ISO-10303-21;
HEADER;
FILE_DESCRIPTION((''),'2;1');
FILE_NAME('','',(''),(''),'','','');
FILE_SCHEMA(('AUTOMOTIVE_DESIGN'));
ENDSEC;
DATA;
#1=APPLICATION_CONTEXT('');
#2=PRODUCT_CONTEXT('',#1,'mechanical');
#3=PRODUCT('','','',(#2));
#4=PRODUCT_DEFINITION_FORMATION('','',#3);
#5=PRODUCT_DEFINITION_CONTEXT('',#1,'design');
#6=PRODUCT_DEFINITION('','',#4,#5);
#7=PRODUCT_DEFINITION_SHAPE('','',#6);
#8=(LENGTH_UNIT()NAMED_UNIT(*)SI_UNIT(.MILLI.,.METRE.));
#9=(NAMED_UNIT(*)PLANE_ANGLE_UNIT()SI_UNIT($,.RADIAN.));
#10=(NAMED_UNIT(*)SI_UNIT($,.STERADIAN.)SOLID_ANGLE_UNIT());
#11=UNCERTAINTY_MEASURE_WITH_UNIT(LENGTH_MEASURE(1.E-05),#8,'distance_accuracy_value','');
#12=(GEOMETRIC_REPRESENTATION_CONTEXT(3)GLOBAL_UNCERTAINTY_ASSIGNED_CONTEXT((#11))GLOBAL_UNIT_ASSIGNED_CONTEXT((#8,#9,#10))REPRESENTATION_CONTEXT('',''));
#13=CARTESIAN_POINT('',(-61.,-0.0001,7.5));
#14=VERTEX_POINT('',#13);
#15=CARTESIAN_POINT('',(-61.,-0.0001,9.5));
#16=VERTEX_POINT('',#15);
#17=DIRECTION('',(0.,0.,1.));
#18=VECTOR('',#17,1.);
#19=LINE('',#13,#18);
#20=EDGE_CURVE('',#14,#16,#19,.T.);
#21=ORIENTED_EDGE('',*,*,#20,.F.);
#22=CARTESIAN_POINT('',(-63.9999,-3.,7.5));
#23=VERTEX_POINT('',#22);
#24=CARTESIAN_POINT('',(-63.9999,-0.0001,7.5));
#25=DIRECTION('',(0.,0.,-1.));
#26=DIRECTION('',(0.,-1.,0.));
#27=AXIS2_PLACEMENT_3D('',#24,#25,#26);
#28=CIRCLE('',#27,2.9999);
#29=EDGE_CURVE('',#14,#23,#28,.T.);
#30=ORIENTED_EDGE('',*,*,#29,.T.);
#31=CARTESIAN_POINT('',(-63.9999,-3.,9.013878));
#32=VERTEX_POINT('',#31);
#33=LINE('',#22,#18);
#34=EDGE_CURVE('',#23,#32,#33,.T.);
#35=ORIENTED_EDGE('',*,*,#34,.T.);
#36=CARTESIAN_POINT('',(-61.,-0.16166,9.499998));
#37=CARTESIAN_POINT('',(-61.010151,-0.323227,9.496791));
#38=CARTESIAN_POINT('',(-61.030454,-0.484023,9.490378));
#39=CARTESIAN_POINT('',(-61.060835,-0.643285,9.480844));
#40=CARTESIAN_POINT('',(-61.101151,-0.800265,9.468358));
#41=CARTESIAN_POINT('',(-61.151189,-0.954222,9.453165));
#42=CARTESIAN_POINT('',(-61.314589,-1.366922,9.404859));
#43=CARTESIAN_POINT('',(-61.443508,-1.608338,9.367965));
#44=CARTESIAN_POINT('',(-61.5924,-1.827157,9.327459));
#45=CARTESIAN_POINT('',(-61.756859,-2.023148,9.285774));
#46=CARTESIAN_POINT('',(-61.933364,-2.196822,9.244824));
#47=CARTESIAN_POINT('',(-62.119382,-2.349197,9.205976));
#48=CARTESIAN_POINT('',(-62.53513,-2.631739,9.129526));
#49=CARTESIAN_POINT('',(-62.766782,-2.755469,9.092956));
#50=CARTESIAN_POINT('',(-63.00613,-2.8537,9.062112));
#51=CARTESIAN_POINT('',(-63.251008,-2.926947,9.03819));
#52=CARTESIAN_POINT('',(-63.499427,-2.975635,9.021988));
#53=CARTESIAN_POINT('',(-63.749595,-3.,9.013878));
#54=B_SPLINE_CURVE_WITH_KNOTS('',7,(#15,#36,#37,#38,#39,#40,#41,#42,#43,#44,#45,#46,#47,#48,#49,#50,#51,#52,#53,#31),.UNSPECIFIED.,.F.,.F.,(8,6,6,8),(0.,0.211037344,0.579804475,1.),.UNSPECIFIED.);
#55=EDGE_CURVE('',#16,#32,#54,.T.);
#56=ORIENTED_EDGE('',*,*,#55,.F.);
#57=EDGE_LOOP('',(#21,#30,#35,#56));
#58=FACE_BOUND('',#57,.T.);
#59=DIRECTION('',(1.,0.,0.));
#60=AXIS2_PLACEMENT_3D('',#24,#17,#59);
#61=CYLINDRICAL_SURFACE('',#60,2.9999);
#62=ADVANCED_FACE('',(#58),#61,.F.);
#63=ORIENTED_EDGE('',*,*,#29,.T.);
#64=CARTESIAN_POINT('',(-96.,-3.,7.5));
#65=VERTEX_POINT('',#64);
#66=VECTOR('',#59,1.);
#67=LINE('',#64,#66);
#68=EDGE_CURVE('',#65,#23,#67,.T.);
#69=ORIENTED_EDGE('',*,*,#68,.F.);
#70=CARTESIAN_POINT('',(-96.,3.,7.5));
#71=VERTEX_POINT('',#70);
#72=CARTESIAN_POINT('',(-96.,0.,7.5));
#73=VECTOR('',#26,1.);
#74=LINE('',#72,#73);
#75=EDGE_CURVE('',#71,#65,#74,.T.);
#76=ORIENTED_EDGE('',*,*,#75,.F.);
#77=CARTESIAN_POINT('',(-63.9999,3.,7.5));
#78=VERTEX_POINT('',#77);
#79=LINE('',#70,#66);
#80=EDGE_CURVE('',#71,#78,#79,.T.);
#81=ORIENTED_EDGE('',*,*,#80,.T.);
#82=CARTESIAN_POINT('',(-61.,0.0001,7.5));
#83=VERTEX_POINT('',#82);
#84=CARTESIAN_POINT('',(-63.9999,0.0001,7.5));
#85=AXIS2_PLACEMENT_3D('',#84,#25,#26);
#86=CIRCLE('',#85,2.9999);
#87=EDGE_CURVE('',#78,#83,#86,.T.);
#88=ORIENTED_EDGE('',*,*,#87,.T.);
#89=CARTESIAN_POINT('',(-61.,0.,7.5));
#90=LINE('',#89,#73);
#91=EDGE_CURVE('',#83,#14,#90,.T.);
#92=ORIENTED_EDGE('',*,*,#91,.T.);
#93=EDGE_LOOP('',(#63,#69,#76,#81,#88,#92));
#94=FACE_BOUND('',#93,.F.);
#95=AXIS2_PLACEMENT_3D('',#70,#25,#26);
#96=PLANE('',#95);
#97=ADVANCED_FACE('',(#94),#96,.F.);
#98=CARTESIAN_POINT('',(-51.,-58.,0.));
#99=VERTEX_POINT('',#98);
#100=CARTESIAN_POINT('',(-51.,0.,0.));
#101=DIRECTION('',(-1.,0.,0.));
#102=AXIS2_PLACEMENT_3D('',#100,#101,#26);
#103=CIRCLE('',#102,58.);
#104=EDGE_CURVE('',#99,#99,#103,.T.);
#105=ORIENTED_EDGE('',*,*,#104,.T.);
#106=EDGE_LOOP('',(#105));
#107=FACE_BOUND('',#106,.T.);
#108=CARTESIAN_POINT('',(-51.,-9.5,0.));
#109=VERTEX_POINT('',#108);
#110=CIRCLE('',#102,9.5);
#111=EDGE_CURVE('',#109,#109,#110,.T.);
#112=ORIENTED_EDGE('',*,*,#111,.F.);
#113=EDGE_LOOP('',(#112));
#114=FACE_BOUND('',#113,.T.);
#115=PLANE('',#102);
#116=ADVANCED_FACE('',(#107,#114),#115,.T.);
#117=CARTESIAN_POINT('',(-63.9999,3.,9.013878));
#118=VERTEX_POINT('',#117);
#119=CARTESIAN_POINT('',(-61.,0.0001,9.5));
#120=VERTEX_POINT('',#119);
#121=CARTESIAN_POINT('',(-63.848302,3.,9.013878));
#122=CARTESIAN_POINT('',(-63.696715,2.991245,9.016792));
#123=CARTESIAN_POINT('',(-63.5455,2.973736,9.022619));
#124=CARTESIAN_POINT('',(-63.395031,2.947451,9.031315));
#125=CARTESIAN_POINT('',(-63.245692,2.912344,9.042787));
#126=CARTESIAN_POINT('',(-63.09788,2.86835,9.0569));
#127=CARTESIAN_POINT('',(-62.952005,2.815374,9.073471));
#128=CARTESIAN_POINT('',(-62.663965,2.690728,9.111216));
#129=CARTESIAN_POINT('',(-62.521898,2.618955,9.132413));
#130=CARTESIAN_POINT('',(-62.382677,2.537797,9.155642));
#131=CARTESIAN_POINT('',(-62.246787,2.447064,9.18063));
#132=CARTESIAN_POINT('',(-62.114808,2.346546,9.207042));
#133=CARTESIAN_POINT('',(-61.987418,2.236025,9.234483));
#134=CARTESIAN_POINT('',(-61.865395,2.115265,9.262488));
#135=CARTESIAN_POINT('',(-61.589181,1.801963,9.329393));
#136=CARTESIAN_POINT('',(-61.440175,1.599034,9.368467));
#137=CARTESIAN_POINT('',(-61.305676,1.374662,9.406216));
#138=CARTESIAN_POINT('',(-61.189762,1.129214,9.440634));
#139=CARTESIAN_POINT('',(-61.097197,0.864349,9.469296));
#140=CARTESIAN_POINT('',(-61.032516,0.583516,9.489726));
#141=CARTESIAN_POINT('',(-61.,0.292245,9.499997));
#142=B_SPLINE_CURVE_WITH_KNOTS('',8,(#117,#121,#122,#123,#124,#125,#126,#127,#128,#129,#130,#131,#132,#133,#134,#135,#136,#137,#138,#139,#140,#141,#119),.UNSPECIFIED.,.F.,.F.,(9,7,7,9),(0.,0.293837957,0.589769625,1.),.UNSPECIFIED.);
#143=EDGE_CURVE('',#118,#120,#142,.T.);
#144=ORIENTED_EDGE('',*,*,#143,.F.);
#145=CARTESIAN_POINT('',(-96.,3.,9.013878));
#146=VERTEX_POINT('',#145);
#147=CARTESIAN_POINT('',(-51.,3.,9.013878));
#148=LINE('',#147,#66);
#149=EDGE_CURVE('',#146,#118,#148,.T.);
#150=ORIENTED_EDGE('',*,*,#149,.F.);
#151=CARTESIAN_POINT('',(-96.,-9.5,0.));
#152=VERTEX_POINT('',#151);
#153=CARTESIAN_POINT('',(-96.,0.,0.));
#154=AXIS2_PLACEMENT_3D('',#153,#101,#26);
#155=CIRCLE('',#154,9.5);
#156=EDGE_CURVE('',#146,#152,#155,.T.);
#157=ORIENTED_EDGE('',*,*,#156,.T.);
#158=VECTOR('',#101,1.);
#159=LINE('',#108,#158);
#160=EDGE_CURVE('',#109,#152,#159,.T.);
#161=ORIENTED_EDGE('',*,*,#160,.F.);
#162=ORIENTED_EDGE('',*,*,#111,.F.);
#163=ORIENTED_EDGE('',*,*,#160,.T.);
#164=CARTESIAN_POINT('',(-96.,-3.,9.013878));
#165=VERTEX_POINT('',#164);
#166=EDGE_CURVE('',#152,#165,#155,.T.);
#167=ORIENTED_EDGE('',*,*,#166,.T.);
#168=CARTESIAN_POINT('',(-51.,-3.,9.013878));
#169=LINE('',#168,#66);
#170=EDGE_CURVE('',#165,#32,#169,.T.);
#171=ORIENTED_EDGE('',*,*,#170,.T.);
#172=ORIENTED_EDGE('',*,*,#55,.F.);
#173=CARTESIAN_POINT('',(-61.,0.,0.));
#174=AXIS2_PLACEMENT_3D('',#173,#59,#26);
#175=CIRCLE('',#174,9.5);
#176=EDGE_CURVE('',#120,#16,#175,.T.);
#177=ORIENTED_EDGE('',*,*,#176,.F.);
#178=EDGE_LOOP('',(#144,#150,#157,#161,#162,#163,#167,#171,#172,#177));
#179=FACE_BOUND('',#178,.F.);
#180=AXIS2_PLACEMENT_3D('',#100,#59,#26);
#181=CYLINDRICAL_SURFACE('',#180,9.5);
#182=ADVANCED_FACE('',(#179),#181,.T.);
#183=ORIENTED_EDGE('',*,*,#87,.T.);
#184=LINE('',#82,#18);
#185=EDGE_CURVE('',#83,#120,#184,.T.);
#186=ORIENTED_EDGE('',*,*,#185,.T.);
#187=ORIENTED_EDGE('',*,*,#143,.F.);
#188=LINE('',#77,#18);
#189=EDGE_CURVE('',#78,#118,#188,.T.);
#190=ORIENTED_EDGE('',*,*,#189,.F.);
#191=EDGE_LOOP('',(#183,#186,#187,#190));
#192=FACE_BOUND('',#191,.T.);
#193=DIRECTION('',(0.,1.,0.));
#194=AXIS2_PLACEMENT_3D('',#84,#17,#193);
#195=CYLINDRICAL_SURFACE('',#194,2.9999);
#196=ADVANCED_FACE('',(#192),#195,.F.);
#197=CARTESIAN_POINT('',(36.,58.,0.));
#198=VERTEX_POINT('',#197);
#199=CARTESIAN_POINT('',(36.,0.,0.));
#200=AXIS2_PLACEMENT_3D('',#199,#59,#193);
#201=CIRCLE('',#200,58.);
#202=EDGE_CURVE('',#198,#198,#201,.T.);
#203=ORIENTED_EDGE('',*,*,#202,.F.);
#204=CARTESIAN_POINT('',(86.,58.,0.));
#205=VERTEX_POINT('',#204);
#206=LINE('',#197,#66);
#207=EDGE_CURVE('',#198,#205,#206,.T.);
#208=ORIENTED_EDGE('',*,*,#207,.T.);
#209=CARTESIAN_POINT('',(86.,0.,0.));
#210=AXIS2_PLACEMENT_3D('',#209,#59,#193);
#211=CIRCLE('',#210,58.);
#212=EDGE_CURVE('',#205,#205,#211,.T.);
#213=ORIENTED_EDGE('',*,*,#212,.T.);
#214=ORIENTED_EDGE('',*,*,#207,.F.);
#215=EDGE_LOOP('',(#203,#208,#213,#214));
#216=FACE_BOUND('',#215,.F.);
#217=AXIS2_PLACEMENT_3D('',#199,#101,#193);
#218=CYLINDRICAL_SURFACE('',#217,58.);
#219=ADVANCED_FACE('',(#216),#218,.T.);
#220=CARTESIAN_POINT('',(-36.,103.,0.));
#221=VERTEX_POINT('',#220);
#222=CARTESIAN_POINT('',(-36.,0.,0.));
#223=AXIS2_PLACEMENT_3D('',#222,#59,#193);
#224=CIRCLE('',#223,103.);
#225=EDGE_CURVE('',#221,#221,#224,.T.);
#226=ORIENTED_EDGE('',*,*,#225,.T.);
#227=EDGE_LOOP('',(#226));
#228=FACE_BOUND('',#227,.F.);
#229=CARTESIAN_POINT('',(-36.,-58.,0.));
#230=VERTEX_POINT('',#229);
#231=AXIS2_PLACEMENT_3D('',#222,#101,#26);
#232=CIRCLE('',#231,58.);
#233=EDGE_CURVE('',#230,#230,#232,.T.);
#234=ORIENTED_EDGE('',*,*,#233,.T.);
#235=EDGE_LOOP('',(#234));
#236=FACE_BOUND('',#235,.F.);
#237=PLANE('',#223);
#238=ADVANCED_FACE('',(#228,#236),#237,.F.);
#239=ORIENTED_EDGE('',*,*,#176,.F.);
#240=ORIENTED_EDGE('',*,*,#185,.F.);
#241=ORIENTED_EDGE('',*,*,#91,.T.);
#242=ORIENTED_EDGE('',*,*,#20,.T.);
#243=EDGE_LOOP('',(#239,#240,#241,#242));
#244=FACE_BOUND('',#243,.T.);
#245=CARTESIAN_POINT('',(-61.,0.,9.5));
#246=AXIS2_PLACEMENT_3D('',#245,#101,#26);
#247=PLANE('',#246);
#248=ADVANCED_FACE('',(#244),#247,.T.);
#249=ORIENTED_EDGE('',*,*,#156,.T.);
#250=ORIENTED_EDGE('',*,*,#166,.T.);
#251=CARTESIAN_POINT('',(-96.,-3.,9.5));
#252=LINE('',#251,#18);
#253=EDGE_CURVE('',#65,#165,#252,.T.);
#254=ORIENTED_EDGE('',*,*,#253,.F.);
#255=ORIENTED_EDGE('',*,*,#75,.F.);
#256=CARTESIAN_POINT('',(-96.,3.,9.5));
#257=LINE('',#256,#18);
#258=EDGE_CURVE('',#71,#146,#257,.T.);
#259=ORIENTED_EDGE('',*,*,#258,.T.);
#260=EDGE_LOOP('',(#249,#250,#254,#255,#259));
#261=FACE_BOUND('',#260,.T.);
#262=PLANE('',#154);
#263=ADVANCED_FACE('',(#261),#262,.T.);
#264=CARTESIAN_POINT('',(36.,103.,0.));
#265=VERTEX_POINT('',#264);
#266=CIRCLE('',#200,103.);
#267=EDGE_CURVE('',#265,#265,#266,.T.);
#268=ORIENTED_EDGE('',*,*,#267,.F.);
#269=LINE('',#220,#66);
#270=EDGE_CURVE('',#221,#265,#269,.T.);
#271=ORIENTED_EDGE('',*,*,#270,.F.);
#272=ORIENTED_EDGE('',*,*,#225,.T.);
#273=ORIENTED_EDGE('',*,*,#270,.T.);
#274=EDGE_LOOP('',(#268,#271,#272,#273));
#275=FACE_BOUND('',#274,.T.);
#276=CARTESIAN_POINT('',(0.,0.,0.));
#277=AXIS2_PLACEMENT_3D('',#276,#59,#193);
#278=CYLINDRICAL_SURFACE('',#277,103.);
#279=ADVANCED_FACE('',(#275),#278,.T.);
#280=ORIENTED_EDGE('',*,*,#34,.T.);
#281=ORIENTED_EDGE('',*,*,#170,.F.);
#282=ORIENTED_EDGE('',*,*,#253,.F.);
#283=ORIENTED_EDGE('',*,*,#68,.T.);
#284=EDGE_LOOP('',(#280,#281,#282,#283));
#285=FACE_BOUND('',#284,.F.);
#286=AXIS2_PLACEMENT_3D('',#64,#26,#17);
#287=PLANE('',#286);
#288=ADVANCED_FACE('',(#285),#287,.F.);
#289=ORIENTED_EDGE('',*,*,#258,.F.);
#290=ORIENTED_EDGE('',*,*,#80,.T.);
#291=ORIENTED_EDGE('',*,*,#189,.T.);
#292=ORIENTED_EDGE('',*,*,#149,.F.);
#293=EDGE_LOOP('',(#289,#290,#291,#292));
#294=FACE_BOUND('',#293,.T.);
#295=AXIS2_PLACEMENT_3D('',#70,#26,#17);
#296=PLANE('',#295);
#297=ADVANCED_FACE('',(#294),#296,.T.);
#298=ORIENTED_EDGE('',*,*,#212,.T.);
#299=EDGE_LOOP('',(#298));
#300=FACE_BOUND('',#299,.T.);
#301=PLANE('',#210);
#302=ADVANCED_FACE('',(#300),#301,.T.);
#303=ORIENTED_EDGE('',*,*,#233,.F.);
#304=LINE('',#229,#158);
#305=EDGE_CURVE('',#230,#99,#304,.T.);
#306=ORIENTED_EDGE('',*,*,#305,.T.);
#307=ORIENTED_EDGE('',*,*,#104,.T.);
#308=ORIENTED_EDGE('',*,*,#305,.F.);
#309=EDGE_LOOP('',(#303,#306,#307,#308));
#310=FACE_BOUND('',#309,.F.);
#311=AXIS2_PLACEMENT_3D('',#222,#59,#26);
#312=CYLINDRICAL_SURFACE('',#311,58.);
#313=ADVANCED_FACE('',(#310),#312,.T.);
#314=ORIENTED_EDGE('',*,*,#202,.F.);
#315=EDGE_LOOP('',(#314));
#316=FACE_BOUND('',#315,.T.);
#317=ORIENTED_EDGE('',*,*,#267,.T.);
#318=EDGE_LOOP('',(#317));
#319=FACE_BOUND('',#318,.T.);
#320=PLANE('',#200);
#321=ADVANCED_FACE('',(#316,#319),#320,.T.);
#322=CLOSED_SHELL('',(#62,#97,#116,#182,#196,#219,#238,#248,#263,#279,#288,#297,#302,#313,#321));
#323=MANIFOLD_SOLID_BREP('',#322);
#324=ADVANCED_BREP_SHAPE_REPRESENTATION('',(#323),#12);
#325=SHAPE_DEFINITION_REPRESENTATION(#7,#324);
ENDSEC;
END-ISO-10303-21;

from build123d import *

# Parameters (mm, degrees)
F0_R     = 103
F1_DEPTH = 36
F2_R     = 58
F3_DEPTH = 50
F4_R     = 58
F5_DEPTH = 15
F6_R     = 9.5
F7_DEPTH = 45
F8_W     = 6
F8_H     = 4
F9_DEPTH = 35
F10_R    = 2.9999


# Not quite as in the source:
# - a fillet or chamfer is up to 0.001 mm smaller than in the source, because OpenCascade refuses the exact size


with BuildPart() as f1:
    # F0 (on Right) → F1 (new body, symmetric)
    with BuildSketch(Plane.YZ):
        Circle(F0_R)
    extrude(amount=F1_DEPTH, both=True)

    # F2 (on face) → F3 (join)
    with BuildSketch(Plane.YZ.offset(36)):
        Circle(F2_R)
    extrude(amount=F3_DEPTH)

    # F4 (on face) → F5 (join)
    with BuildSketch(Plane(origin=(-36, 0, 0), x_dir=(0, -1, 0), z_dir=(-1, 0, 0))):
        Circle(F4_R)
    extrude(amount=F5_DEPTH)

    # F6 (on face) → F7 (join)
    with BuildSketch(Plane(origin=(-51, 0, 0), x_dir=(0, -1, 0), z_dir=(-1, 0, 0))):
        Circle(F6_R)
    extrude(amount=F7_DEPTH)

    # F8 (on face) → F9 (cut)
    with BuildSketch(Plane(origin=(-96, 0, 0), x_dir=(0, -1, 0), z_dir=(-1, 0, 0))):
        with Locations((0, 9.5)):
            Rectangle(F8_W, F8_H)
    extrude(amount=-F9_DEPTH, mode=Mode.SUBTRACT)

    # F10 (radius 3 in the source; OpenCascade refuses exactly that, so slightly less here)
    f10_edges = [f1.edges().sort_by_distance(p)[0] for p in [
        (-61, 3, 8.256939),
        (-61, -3, 8.256939),
    ]]
    fillet(f10_edges, radius=F10_R)


solid = f1.part
